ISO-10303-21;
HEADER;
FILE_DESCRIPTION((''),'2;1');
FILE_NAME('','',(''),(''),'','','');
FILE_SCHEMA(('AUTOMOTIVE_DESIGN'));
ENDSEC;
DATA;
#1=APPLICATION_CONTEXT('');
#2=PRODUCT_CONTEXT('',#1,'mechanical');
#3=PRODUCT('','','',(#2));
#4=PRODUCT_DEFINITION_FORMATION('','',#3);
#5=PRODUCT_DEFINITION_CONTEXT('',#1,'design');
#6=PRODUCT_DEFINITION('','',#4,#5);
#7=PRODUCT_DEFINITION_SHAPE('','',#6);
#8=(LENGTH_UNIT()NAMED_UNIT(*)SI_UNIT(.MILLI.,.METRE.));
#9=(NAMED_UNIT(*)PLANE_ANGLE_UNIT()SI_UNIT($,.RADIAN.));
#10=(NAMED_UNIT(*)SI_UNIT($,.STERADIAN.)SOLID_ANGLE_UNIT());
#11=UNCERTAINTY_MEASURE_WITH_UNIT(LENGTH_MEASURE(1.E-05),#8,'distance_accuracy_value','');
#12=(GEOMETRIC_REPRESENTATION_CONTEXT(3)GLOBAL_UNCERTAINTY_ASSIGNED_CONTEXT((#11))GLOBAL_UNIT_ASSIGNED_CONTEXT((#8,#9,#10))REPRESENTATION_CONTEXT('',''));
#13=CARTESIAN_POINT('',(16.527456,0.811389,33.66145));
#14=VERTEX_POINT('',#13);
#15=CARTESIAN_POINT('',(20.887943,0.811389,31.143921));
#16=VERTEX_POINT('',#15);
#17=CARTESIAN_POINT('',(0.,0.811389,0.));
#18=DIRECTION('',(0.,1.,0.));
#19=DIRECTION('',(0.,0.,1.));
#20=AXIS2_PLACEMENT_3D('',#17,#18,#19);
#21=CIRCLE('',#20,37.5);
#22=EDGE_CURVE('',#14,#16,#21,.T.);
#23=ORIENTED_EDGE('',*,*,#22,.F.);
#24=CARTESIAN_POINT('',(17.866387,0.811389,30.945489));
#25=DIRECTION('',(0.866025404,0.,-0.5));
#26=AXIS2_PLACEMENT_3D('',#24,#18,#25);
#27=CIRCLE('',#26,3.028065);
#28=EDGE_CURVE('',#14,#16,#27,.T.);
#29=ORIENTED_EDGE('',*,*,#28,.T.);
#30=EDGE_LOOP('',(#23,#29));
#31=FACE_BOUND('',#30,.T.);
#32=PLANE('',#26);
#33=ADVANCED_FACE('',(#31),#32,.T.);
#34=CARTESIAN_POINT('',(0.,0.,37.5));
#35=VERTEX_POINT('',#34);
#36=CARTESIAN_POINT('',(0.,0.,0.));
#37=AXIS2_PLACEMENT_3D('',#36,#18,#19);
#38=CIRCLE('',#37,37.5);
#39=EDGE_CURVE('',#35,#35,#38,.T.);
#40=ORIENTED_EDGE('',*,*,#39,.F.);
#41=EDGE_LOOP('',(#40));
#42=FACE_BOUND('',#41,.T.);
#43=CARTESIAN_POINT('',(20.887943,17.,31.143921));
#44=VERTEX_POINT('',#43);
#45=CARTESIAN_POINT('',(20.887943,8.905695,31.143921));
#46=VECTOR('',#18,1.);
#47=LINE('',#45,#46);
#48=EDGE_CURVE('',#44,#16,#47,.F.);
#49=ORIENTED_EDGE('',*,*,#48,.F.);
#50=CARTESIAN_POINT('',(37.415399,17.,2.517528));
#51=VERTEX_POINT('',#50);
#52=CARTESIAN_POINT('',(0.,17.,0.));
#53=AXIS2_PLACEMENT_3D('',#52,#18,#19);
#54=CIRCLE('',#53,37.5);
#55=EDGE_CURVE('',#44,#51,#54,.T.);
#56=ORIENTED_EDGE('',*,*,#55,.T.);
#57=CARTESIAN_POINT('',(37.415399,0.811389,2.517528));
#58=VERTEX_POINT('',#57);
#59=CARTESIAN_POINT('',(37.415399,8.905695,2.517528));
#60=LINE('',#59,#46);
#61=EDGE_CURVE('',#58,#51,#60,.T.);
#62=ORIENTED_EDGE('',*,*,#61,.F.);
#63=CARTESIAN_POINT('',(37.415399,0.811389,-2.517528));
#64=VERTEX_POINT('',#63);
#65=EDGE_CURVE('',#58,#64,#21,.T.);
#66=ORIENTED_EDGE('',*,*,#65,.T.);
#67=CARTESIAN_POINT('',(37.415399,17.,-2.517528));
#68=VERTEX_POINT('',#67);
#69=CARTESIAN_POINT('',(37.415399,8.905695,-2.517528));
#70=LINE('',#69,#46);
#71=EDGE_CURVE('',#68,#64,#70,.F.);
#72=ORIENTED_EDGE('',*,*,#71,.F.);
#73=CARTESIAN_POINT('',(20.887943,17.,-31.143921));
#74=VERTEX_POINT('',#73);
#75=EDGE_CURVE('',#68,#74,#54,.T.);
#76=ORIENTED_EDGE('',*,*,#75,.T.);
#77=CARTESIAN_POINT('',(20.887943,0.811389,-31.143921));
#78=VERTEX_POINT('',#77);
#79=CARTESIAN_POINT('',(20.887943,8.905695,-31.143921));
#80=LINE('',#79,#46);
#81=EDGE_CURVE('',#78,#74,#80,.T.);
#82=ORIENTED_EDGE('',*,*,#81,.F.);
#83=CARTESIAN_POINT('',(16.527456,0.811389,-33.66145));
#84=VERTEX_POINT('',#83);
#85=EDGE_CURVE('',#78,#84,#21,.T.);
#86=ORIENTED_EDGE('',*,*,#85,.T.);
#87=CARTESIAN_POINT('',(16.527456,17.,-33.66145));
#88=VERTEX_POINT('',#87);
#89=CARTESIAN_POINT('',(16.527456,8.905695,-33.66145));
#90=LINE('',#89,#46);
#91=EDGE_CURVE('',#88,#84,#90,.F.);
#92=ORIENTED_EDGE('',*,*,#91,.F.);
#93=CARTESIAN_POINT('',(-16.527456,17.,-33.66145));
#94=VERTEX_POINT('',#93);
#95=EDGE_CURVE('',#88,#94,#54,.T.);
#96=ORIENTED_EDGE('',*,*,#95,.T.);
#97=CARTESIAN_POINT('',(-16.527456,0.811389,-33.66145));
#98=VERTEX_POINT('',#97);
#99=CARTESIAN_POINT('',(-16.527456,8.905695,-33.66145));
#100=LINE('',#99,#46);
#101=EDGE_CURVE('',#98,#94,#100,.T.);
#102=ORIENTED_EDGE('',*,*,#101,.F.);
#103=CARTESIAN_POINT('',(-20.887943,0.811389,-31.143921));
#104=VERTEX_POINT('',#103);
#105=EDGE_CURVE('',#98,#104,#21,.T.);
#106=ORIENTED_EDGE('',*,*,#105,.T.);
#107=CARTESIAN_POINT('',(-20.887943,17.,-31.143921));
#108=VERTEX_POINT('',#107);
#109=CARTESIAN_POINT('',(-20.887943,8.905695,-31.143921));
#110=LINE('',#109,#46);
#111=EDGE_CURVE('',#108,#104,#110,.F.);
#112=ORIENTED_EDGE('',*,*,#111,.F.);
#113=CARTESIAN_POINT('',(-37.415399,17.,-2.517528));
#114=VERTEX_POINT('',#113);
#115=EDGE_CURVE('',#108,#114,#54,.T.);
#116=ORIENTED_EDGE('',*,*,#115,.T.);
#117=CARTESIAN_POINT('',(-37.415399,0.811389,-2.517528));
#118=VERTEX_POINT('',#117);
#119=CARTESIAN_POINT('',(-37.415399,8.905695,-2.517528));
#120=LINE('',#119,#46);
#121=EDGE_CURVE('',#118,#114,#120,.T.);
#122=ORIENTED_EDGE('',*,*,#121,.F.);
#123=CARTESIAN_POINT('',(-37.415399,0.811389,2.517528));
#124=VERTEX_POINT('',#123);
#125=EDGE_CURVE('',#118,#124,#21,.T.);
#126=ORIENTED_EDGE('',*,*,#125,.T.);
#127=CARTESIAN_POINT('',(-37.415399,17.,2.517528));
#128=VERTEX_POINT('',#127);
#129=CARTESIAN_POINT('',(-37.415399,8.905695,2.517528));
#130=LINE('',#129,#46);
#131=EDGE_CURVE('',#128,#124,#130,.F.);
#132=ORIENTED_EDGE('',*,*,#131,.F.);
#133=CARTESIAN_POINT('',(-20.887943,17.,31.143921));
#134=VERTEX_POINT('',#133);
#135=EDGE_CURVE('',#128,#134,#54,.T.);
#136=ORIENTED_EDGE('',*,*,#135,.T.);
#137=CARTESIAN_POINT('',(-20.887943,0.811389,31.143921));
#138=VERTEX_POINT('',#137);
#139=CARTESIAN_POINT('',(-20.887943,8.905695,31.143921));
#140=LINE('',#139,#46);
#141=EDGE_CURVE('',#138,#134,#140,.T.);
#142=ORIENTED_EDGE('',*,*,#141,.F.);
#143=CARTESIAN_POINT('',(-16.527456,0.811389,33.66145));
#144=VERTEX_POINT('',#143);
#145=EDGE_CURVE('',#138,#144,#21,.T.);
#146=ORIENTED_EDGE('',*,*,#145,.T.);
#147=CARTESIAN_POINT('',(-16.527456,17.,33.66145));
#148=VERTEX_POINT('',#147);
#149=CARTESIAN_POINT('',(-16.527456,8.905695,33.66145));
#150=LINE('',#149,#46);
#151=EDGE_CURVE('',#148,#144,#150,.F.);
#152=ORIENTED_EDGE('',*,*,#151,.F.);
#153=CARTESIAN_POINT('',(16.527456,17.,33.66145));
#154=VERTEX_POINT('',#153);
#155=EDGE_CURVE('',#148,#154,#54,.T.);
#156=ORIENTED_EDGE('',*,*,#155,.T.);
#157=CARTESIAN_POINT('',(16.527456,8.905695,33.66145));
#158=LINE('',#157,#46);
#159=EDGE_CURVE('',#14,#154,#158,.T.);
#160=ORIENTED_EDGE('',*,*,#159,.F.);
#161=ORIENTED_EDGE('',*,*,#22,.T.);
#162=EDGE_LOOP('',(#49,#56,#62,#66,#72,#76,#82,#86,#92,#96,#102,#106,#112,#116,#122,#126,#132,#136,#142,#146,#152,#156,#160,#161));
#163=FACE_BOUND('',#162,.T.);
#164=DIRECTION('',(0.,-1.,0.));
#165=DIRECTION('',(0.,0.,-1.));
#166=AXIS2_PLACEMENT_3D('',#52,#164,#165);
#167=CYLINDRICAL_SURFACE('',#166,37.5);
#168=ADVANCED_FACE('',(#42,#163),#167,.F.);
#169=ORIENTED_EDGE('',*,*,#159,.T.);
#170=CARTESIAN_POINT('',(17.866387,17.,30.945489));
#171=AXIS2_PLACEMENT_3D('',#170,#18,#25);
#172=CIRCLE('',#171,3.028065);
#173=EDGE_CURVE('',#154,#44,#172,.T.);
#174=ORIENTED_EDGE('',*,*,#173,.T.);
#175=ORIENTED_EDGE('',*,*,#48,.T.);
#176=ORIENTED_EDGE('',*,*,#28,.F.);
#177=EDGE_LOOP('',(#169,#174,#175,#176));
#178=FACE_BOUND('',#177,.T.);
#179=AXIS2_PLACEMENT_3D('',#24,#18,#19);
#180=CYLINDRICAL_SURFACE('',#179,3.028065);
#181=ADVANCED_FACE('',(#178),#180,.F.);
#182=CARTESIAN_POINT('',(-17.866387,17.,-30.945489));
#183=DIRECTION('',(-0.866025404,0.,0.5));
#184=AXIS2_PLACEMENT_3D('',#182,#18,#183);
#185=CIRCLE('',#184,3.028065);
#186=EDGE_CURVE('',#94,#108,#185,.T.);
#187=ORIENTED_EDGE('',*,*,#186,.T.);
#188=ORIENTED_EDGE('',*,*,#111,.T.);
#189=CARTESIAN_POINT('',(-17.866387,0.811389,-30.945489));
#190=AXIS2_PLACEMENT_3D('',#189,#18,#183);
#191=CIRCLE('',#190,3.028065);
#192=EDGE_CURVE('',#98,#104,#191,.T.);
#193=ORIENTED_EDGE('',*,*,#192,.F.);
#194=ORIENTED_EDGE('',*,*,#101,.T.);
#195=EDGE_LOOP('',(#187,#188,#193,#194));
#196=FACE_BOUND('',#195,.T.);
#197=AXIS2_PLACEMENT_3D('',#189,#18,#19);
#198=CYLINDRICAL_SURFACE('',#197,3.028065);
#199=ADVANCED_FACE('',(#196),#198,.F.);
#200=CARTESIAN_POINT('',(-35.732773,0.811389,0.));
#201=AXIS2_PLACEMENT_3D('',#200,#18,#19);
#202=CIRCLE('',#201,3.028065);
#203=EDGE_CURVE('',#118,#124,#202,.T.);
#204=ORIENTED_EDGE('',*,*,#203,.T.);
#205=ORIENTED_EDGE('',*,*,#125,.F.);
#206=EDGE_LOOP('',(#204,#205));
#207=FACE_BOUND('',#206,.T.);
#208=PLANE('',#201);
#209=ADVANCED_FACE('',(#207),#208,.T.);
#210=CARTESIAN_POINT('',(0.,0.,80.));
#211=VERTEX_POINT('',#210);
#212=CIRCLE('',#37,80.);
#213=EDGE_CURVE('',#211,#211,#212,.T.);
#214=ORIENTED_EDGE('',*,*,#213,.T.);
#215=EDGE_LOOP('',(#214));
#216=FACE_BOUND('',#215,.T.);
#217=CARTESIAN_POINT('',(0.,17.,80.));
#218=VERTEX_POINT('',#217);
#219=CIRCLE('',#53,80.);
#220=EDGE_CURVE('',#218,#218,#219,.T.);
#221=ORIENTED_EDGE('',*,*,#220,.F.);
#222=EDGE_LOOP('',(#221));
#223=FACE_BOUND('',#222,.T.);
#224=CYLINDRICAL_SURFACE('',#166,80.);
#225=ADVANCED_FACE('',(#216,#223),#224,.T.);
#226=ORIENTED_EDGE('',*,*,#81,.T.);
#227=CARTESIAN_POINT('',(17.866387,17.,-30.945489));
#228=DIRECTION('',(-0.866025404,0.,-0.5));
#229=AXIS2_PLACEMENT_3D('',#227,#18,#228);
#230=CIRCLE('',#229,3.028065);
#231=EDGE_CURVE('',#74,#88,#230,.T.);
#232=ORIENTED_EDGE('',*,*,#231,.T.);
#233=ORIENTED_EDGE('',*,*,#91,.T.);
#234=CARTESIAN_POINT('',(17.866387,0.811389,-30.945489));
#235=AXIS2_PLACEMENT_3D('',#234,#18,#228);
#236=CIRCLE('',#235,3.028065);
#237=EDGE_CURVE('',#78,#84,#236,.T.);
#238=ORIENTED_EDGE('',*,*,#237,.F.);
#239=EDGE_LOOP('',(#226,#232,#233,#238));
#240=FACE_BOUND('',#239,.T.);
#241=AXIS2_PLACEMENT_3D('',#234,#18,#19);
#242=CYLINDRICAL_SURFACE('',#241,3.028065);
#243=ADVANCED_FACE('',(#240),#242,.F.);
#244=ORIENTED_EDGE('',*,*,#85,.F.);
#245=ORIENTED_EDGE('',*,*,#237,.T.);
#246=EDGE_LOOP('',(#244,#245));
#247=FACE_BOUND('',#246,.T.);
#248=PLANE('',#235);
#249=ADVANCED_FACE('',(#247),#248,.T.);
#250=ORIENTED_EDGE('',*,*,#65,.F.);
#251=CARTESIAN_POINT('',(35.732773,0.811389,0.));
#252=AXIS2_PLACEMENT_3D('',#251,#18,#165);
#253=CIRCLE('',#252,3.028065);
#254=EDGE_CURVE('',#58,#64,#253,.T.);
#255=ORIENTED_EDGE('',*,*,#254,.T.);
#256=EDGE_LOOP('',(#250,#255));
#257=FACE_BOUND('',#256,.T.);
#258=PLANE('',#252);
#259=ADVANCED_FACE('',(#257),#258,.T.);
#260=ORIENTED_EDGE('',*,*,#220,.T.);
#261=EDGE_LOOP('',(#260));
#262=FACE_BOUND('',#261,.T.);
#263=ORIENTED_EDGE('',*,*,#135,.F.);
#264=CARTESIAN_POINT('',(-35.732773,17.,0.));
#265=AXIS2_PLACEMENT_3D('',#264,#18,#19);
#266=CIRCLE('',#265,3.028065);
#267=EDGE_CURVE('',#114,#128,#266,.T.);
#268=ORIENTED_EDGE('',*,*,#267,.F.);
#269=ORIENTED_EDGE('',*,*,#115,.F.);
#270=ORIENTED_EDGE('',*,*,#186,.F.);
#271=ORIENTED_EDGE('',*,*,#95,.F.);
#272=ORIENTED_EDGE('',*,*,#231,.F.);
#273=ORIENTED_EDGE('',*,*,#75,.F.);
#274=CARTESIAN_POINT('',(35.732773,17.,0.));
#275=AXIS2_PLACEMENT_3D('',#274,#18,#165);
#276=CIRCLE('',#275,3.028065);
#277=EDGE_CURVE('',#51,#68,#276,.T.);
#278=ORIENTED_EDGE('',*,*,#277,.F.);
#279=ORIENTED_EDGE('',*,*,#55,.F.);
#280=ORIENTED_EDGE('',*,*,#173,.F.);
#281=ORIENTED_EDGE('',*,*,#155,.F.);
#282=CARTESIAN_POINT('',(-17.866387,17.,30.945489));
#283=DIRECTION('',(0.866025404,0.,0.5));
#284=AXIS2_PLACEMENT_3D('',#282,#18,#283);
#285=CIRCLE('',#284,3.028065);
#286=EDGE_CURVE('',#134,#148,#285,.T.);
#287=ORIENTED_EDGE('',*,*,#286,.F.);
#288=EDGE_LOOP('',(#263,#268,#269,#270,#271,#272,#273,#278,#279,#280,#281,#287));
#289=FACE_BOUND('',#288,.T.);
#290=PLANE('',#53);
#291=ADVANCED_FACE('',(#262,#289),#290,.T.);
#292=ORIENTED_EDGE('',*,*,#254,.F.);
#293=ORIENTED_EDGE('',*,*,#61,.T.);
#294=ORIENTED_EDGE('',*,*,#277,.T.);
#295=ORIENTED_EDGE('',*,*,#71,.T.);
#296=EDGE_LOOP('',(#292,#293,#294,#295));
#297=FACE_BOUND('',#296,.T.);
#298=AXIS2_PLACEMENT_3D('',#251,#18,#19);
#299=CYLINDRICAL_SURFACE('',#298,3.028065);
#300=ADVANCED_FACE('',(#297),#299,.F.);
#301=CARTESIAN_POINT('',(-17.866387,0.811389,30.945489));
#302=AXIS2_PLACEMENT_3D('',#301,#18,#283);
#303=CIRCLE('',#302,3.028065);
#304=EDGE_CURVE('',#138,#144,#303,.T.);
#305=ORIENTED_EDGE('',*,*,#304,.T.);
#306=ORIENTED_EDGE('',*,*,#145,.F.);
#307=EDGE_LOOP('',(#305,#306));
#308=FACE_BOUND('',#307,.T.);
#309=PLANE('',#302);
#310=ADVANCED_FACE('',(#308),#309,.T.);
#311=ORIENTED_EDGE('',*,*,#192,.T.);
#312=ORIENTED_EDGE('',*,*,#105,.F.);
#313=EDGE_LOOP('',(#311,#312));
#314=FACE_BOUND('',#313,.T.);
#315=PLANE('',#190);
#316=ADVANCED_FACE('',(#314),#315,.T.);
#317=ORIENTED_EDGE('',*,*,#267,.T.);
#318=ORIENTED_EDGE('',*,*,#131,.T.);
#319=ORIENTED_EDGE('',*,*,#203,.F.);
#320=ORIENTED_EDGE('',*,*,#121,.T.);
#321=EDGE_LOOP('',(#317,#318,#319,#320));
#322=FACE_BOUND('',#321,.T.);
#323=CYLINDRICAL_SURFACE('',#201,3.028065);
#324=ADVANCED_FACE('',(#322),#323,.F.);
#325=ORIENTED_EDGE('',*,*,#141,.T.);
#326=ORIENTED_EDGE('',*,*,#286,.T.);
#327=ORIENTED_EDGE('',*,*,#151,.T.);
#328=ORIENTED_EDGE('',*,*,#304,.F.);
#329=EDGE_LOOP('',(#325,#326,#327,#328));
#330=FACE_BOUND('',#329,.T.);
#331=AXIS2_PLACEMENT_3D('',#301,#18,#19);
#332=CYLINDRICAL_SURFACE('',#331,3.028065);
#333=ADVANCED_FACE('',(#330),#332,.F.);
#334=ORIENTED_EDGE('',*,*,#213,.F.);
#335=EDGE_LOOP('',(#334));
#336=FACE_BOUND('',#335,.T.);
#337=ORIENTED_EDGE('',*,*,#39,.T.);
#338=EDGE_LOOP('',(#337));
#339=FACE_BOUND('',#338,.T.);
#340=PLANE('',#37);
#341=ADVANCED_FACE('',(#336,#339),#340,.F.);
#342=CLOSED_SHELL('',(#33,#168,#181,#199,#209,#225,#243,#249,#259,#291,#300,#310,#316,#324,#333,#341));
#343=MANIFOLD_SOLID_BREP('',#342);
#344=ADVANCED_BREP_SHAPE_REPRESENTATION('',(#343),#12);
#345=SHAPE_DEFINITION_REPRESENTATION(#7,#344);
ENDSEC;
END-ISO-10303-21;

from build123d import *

# Parameters (mm, degrees)
SKETCH1_R           = 80
BOSS_EXTRUDE1_DEPTH = 17
SKETCH2_R           = 37.5
CUT_EXTRUDE1_DEPTH  = 115.407167608
SKETCH3_R           = 3.028065018
CUT_EXTRUDE2_DEPTH  = 16.188610835
CIRPATTERN1_COUNT   = 6


with BuildPart() as part:
    # Sketch1 → Boss-Extrude1 (new body)
    with BuildSketch(Plane(origin=(0, 0, 0), x_dir=(1, 0, 0), z_dir=(0, 1, 0))):
        Circle(SKETCH1_R)
    extrude(amount=BOSS_EXTRUDE1_DEPTH)

    # Sketch2 → Cut-Extrude1 (cut, through all)
    with BuildSketch(Plane(origin=(0, 0, 0), x_dir=(1, 0, 0), z_dir=(0, 1, 0))):
        Circle(SKETCH2_R)
    extrude(amount=CUT_EXTRUDE1_DEPTH, mode=Mode.SUBTRACT)

    # Sketch3 → Cut-Extrude2 (cut)
    with BuildSketch(Plane(origin=(0, 17, 0), x_dir=(1, 0, 0), z_dir=(0, 1, 0))):
        with Locations((-35.732773003, 0)):
            Circle(SKETCH3_R)
    cut_extrude2 = extrude(amount=-CUT_EXTRUDE2_DEPTH, mode=Mode.SUBTRACT)

    # CirPattern1: Cut-Extrude2 ×6 about axis
    cirpattern1_axis = Axis((0, 0, 0), (0, 1, 0))
    for i in range(1, CIRPATTERN1_COUNT):
        add(cut_extrude2.rotate(cirpattern1_axis, i * 360 / CIRPATTERN1_COUNT), mode=Mode.SUBTRACT)


solid = part.part
